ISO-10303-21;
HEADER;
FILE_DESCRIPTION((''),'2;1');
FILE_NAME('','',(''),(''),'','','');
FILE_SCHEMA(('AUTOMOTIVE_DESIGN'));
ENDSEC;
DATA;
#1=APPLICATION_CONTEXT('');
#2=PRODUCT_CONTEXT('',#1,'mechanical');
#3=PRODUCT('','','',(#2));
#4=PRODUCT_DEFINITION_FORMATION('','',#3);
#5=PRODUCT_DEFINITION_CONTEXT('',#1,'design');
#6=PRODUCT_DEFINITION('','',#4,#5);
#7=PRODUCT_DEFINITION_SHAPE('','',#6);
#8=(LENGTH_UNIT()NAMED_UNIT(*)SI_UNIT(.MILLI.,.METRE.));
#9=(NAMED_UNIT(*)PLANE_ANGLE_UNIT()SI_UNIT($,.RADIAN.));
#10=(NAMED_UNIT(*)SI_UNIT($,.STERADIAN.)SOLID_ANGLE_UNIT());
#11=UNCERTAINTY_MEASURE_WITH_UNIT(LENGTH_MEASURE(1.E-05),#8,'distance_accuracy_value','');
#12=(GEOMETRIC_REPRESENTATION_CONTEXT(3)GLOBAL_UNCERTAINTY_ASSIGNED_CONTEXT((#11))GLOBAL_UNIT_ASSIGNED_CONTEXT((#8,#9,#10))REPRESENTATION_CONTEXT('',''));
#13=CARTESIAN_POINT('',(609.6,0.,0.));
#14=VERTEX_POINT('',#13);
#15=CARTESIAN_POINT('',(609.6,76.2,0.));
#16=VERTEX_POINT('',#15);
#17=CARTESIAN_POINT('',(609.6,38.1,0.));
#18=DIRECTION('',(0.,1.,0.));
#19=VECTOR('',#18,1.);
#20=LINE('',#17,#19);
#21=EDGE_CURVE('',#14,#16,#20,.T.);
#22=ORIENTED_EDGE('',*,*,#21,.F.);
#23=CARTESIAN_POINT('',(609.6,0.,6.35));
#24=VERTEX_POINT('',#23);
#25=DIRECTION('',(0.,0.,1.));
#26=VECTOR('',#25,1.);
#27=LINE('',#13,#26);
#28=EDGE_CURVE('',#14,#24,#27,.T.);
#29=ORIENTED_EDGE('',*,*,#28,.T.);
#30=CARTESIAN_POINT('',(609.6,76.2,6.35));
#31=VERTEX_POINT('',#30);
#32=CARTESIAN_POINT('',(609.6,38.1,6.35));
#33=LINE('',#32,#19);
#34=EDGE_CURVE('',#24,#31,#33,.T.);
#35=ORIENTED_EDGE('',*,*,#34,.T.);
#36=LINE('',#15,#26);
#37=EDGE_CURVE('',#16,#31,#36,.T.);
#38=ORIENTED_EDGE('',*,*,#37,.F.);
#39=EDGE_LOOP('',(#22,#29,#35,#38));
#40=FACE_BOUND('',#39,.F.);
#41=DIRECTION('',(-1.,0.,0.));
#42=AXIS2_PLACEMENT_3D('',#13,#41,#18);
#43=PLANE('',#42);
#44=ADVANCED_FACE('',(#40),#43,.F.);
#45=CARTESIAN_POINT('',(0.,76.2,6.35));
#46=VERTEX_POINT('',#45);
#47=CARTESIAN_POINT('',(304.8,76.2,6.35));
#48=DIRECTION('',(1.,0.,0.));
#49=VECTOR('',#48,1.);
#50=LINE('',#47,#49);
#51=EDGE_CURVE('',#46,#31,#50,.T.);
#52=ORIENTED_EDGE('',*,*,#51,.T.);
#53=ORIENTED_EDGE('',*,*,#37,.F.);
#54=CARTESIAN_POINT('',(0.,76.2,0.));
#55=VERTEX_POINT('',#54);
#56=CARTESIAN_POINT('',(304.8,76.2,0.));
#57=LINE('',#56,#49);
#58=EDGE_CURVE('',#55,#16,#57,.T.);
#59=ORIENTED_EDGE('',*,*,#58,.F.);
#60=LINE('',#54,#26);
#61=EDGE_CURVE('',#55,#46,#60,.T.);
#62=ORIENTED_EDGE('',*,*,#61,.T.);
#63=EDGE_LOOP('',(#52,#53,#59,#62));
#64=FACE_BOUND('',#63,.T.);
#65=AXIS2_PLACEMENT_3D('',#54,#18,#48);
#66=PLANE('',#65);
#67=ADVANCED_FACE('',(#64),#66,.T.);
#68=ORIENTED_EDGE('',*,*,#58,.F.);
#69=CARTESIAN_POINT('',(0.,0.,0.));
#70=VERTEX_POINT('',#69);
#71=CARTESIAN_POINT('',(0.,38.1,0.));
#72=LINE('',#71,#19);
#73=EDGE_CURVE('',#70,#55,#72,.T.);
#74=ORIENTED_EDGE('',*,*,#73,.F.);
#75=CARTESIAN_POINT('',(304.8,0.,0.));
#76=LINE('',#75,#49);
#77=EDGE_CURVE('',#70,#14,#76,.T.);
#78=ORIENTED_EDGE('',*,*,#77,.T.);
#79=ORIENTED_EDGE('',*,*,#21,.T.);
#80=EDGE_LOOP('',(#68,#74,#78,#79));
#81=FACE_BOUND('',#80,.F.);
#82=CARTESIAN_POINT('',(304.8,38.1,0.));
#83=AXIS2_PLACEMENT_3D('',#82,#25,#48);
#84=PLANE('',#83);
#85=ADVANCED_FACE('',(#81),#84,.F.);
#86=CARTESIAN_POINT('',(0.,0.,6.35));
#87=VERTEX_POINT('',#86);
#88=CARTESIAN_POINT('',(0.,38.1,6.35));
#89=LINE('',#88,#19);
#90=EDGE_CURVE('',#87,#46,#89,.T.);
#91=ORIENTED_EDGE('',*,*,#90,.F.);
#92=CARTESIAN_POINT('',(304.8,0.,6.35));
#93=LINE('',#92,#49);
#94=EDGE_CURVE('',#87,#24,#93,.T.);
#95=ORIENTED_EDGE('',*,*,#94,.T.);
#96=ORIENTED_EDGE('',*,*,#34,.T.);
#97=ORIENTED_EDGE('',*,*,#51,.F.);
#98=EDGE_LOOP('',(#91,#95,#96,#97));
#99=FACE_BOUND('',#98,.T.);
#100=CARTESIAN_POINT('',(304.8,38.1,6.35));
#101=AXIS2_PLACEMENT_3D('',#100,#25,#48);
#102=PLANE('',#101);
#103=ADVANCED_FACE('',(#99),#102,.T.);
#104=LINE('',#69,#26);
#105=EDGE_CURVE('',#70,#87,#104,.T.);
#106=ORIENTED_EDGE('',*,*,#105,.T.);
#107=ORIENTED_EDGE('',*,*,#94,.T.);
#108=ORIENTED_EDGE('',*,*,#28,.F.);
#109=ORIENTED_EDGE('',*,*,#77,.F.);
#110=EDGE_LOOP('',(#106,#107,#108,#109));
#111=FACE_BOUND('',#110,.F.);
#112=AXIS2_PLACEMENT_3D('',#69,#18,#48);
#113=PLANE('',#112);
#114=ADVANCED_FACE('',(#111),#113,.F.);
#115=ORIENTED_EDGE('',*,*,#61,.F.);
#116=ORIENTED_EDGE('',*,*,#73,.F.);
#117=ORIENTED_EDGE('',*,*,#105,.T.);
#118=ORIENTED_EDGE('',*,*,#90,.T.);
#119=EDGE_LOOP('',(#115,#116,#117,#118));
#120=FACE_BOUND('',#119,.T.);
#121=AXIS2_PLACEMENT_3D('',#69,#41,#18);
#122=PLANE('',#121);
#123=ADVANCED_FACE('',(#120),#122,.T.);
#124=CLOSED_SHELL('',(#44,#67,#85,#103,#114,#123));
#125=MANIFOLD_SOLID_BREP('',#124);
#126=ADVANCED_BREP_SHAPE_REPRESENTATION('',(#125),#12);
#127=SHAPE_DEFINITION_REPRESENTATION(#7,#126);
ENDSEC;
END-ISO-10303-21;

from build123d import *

# Parameters (mm, degrees)
F1_W     = 609.6
F1_H     = 76.2
F2_DEPTH = 6.35


# Not quite as in the source:
# - a variable given as a bare number and used for a length is read in inches; the dataset says mm whatever the document's units were


with BuildPart() as f2:
    # F1 (on Top) → F2 (new body)
    with BuildSketch(Plane.XY):
        with Locations((304.8, 38.1)):
            Rectangle(F1_W, F1_H)
    extrude(amount=F2_DEPTH)


solid = f2.part
